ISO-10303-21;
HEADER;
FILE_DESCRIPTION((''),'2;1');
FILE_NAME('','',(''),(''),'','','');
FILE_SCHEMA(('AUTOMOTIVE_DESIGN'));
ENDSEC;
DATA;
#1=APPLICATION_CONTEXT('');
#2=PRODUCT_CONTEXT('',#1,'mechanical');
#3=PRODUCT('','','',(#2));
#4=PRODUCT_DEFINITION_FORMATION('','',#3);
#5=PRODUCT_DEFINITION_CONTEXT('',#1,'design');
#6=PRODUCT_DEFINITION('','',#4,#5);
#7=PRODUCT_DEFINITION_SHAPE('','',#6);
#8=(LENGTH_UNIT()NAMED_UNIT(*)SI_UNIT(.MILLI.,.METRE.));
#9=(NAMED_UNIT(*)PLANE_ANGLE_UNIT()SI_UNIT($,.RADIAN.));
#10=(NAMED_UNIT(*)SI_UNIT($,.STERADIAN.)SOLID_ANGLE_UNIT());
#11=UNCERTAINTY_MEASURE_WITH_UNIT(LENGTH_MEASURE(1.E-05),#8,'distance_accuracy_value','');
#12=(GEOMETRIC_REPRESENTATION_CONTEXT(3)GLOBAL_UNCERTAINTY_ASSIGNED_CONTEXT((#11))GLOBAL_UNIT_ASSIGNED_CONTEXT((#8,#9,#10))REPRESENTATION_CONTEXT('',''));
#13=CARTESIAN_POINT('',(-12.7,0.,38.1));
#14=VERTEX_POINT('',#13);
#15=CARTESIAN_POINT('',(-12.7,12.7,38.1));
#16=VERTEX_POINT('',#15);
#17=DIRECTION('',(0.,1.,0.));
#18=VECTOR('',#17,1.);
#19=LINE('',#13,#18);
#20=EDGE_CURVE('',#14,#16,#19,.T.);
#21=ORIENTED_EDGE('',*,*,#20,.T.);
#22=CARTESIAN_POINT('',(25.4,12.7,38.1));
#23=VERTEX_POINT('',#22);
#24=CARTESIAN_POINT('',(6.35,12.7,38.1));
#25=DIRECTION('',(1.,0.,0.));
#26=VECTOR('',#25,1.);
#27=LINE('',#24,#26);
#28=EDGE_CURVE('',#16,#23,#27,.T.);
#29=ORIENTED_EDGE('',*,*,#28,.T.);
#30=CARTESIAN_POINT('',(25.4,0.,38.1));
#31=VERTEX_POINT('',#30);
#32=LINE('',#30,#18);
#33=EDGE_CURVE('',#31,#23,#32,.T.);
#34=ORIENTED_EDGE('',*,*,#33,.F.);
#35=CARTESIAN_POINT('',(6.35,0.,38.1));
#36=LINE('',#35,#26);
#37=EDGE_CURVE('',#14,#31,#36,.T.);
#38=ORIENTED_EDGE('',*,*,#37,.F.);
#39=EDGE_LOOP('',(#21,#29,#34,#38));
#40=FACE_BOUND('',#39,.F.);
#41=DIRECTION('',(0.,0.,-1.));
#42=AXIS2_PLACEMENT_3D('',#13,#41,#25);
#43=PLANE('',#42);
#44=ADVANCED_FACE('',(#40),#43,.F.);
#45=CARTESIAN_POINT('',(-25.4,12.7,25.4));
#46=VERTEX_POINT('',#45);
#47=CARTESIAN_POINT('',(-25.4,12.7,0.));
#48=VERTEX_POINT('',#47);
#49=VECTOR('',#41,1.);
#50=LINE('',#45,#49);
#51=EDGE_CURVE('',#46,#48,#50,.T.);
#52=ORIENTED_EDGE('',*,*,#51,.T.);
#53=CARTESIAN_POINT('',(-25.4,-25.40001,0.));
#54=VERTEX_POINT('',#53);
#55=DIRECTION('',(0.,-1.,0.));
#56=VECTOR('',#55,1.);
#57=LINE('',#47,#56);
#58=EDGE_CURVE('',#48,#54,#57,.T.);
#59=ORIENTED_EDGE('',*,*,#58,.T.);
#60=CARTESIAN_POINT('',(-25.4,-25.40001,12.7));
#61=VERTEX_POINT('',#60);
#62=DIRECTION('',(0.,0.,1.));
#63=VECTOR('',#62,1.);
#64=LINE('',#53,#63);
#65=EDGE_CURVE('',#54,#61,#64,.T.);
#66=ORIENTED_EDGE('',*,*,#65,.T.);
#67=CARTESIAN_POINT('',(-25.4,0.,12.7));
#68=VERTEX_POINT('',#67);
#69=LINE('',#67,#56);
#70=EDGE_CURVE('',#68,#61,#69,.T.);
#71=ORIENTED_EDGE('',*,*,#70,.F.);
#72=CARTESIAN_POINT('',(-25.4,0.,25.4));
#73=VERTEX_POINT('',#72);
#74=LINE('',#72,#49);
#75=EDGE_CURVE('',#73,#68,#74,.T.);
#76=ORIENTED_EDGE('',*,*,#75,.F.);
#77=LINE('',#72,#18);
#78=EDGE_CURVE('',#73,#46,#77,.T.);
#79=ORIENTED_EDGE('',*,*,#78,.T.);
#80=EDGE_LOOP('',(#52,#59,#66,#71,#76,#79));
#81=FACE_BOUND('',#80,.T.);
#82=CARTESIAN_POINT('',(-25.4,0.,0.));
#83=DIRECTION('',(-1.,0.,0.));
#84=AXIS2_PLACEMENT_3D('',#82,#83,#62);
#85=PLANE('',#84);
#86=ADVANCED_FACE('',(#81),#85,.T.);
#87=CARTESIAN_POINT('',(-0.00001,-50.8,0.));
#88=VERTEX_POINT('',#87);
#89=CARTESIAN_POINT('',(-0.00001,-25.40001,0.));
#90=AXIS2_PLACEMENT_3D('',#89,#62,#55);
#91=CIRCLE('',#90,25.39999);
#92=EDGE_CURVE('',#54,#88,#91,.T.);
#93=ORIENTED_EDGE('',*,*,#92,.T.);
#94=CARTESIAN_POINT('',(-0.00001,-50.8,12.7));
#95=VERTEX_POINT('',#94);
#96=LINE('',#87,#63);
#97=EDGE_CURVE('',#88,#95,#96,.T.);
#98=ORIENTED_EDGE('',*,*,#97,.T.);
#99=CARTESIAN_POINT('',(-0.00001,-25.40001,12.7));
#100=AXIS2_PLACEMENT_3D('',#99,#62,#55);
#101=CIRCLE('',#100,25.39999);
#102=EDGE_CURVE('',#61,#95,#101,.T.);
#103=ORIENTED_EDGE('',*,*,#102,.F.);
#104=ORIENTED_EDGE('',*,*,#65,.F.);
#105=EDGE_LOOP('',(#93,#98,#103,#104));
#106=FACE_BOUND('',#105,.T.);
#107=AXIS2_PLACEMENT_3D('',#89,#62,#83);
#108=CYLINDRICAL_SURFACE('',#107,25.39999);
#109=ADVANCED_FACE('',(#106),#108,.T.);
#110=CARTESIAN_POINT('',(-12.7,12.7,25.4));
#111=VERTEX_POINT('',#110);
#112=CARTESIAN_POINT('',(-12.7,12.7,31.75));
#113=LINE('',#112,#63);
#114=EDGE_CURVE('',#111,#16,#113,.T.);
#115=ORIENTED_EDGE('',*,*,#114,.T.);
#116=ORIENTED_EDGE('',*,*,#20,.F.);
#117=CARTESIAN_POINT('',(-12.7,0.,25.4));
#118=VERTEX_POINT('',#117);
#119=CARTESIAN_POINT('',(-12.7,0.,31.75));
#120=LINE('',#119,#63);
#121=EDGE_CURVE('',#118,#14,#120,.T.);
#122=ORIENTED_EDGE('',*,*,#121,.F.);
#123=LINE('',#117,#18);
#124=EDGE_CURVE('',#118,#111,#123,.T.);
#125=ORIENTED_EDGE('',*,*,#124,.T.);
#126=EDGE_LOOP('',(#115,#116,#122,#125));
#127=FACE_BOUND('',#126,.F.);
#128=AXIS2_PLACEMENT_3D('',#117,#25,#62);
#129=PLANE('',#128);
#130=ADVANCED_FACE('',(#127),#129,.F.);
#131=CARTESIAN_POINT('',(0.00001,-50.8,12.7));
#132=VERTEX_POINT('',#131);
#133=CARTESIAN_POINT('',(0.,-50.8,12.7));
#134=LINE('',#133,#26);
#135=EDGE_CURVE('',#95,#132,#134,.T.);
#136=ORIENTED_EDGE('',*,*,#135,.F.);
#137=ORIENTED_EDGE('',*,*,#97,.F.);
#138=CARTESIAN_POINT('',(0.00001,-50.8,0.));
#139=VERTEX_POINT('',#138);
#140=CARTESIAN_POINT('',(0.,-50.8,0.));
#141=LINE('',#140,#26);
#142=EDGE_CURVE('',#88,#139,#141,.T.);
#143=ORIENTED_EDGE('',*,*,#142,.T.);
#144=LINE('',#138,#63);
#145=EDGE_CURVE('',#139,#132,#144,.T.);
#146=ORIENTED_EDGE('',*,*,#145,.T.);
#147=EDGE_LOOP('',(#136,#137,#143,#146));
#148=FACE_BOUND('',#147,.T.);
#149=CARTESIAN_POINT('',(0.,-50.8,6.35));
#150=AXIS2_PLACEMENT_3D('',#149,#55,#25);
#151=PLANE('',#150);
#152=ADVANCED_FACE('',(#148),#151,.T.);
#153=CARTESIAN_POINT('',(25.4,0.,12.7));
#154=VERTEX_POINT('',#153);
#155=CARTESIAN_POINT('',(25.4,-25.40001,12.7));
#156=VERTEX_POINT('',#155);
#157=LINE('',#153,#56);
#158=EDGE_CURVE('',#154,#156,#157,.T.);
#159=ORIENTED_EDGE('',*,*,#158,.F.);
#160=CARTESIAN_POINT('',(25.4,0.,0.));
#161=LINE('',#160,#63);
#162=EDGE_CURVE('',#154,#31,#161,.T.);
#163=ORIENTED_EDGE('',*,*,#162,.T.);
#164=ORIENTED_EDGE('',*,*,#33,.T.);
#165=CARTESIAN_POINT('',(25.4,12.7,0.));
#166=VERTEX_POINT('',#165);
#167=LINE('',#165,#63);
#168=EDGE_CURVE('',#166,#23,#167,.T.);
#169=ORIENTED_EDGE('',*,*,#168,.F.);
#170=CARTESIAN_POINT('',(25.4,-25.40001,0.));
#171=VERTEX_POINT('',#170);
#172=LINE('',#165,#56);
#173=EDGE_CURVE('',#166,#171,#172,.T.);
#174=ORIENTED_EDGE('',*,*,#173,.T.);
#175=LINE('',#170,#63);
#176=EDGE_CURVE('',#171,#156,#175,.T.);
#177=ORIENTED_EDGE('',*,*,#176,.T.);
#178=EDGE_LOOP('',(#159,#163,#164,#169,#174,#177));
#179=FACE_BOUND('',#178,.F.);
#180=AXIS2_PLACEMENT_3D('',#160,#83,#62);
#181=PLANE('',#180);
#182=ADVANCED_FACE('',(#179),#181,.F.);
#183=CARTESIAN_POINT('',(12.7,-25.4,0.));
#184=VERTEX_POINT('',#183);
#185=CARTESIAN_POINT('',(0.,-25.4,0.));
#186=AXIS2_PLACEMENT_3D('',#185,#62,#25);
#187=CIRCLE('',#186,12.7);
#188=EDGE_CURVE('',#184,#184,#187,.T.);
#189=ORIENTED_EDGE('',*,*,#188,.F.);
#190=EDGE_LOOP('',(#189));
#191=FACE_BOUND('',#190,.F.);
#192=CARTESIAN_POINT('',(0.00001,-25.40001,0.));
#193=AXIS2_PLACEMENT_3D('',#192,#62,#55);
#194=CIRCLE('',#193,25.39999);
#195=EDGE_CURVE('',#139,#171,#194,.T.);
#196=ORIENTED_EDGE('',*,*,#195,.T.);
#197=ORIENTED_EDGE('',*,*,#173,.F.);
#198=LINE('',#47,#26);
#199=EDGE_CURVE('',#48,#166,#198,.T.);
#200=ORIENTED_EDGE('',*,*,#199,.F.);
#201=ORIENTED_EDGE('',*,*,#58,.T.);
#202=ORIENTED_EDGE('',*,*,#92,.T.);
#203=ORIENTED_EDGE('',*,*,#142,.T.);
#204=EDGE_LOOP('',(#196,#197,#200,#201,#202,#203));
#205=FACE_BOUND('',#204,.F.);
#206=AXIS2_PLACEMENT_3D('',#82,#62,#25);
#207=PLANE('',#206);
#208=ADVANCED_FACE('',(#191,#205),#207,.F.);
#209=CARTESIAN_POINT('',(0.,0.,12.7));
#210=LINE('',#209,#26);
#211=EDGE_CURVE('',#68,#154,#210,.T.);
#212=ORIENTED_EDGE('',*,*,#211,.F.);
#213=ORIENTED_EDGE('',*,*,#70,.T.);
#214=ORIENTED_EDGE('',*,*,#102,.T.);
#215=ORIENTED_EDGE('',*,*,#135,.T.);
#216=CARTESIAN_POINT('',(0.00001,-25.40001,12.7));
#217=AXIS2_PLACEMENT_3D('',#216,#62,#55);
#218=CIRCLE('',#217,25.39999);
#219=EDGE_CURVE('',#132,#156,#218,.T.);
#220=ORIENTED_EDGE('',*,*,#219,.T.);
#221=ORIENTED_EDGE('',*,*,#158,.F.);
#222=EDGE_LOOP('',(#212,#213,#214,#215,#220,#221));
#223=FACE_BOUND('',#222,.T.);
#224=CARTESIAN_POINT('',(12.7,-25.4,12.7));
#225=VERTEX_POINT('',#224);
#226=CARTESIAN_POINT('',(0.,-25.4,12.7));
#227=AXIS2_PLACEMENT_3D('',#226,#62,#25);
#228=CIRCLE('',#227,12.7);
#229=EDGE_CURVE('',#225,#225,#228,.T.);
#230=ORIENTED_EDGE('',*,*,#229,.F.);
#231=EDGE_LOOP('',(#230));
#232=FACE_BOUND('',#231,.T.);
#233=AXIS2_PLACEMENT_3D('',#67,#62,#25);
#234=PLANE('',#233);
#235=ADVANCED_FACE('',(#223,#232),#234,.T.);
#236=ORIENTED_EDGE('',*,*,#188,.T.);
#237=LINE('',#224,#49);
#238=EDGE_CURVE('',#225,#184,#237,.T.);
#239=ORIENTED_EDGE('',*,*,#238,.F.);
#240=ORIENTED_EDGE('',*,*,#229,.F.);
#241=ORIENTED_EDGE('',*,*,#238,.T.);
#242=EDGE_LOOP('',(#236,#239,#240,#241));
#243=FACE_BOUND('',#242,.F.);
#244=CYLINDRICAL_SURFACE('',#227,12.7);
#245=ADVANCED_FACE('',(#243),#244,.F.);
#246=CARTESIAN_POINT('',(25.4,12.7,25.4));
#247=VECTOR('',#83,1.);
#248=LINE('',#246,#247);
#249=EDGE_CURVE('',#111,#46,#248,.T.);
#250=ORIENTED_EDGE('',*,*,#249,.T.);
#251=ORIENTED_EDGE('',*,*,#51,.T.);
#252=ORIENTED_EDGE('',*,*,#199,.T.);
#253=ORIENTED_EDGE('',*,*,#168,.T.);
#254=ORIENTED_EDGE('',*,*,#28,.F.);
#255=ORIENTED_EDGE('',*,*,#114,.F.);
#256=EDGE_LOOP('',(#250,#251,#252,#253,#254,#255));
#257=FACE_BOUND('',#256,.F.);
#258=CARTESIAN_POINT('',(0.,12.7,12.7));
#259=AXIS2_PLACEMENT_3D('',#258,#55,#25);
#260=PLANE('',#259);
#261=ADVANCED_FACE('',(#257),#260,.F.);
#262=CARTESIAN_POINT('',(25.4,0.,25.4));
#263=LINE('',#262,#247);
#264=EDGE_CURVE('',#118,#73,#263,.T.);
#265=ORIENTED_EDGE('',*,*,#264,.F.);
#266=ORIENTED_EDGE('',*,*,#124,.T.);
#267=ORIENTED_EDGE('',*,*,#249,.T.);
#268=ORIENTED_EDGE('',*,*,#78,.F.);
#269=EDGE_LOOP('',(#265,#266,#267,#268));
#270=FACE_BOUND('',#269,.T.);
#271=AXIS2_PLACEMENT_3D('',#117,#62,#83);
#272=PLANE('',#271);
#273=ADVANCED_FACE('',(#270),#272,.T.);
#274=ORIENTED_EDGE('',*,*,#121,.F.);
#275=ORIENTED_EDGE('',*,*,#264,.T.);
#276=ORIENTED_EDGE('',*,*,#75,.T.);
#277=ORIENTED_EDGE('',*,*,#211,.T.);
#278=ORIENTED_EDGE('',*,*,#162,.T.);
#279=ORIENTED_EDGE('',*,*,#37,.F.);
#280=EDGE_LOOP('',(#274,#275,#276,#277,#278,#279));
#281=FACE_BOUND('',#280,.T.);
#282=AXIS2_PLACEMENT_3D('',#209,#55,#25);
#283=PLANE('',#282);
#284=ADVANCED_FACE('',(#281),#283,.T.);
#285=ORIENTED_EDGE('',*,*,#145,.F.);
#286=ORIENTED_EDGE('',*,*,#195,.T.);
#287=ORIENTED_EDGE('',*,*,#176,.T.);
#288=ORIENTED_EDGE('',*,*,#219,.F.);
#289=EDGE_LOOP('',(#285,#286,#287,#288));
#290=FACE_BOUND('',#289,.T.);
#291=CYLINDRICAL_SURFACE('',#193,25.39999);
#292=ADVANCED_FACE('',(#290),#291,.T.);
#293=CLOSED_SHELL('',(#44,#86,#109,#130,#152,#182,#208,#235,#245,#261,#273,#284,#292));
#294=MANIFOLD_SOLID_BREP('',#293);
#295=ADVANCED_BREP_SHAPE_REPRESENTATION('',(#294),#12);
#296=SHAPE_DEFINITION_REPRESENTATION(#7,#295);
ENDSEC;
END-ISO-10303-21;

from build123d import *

# Parameters (mm, degrees)
F0_W     = 38.1
F0_H     = 12.7
F1_DEPTH = 12.7
F2_W     = 50.8
F2_H     = 12.7
F3_DEPTH = 50.8
F4_R     = 12.7
F5_DEPTH = 12.701
F6_R     = 25.39999


# Not quite as in the source:
# - a fillet or chamfer is up to 0.001 mm smaller than in the source, because OpenCascade refuses the exact size


with BuildPart() as f1:
    # F0 (on Front) → F1 (new body)
    with BuildSketch(Plane.XZ):
        Polygon((-25.4, 25.4), (-25.4, 0), (25.4, 0), (25.4, 25.4), (-12.7, 25.4), align=None)
        with Locations((6.35, 31.75)):
            Rectangle(F0_W, F0_H)
    extrude(amount=-F1_DEPTH)

    # F2 (on face) → F3 (join)
    with BuildSketch(Plane.XZ):
        with Locations((0, 6.35)):
            Rectangle(F2_W, F2_H)
    extrude(amount=F3_DEPTH)

    # F4 (on face) → F5 (cut, through all)
    with BuildSketch(Plane.XY.offset(12.7)):
        with Locations((0, -25.4)):
            Circle(F4_R)
    extrude(amount=-F5_DEPTH, mode=Mode.SUBTRACT)

    # F6 (radius 25.4 in the source; OpenCascade refuses exactly that, so slightly less here)
    f6_edges = [f1.edges().sort_by_distance(p)[0] for p in [
        (-25.4, -50.8, 6.35),
        (25.4, -50.8, 6.35),
    ]]
    fillet(f6_edges, radius=F6_R)


solid = f1.part
